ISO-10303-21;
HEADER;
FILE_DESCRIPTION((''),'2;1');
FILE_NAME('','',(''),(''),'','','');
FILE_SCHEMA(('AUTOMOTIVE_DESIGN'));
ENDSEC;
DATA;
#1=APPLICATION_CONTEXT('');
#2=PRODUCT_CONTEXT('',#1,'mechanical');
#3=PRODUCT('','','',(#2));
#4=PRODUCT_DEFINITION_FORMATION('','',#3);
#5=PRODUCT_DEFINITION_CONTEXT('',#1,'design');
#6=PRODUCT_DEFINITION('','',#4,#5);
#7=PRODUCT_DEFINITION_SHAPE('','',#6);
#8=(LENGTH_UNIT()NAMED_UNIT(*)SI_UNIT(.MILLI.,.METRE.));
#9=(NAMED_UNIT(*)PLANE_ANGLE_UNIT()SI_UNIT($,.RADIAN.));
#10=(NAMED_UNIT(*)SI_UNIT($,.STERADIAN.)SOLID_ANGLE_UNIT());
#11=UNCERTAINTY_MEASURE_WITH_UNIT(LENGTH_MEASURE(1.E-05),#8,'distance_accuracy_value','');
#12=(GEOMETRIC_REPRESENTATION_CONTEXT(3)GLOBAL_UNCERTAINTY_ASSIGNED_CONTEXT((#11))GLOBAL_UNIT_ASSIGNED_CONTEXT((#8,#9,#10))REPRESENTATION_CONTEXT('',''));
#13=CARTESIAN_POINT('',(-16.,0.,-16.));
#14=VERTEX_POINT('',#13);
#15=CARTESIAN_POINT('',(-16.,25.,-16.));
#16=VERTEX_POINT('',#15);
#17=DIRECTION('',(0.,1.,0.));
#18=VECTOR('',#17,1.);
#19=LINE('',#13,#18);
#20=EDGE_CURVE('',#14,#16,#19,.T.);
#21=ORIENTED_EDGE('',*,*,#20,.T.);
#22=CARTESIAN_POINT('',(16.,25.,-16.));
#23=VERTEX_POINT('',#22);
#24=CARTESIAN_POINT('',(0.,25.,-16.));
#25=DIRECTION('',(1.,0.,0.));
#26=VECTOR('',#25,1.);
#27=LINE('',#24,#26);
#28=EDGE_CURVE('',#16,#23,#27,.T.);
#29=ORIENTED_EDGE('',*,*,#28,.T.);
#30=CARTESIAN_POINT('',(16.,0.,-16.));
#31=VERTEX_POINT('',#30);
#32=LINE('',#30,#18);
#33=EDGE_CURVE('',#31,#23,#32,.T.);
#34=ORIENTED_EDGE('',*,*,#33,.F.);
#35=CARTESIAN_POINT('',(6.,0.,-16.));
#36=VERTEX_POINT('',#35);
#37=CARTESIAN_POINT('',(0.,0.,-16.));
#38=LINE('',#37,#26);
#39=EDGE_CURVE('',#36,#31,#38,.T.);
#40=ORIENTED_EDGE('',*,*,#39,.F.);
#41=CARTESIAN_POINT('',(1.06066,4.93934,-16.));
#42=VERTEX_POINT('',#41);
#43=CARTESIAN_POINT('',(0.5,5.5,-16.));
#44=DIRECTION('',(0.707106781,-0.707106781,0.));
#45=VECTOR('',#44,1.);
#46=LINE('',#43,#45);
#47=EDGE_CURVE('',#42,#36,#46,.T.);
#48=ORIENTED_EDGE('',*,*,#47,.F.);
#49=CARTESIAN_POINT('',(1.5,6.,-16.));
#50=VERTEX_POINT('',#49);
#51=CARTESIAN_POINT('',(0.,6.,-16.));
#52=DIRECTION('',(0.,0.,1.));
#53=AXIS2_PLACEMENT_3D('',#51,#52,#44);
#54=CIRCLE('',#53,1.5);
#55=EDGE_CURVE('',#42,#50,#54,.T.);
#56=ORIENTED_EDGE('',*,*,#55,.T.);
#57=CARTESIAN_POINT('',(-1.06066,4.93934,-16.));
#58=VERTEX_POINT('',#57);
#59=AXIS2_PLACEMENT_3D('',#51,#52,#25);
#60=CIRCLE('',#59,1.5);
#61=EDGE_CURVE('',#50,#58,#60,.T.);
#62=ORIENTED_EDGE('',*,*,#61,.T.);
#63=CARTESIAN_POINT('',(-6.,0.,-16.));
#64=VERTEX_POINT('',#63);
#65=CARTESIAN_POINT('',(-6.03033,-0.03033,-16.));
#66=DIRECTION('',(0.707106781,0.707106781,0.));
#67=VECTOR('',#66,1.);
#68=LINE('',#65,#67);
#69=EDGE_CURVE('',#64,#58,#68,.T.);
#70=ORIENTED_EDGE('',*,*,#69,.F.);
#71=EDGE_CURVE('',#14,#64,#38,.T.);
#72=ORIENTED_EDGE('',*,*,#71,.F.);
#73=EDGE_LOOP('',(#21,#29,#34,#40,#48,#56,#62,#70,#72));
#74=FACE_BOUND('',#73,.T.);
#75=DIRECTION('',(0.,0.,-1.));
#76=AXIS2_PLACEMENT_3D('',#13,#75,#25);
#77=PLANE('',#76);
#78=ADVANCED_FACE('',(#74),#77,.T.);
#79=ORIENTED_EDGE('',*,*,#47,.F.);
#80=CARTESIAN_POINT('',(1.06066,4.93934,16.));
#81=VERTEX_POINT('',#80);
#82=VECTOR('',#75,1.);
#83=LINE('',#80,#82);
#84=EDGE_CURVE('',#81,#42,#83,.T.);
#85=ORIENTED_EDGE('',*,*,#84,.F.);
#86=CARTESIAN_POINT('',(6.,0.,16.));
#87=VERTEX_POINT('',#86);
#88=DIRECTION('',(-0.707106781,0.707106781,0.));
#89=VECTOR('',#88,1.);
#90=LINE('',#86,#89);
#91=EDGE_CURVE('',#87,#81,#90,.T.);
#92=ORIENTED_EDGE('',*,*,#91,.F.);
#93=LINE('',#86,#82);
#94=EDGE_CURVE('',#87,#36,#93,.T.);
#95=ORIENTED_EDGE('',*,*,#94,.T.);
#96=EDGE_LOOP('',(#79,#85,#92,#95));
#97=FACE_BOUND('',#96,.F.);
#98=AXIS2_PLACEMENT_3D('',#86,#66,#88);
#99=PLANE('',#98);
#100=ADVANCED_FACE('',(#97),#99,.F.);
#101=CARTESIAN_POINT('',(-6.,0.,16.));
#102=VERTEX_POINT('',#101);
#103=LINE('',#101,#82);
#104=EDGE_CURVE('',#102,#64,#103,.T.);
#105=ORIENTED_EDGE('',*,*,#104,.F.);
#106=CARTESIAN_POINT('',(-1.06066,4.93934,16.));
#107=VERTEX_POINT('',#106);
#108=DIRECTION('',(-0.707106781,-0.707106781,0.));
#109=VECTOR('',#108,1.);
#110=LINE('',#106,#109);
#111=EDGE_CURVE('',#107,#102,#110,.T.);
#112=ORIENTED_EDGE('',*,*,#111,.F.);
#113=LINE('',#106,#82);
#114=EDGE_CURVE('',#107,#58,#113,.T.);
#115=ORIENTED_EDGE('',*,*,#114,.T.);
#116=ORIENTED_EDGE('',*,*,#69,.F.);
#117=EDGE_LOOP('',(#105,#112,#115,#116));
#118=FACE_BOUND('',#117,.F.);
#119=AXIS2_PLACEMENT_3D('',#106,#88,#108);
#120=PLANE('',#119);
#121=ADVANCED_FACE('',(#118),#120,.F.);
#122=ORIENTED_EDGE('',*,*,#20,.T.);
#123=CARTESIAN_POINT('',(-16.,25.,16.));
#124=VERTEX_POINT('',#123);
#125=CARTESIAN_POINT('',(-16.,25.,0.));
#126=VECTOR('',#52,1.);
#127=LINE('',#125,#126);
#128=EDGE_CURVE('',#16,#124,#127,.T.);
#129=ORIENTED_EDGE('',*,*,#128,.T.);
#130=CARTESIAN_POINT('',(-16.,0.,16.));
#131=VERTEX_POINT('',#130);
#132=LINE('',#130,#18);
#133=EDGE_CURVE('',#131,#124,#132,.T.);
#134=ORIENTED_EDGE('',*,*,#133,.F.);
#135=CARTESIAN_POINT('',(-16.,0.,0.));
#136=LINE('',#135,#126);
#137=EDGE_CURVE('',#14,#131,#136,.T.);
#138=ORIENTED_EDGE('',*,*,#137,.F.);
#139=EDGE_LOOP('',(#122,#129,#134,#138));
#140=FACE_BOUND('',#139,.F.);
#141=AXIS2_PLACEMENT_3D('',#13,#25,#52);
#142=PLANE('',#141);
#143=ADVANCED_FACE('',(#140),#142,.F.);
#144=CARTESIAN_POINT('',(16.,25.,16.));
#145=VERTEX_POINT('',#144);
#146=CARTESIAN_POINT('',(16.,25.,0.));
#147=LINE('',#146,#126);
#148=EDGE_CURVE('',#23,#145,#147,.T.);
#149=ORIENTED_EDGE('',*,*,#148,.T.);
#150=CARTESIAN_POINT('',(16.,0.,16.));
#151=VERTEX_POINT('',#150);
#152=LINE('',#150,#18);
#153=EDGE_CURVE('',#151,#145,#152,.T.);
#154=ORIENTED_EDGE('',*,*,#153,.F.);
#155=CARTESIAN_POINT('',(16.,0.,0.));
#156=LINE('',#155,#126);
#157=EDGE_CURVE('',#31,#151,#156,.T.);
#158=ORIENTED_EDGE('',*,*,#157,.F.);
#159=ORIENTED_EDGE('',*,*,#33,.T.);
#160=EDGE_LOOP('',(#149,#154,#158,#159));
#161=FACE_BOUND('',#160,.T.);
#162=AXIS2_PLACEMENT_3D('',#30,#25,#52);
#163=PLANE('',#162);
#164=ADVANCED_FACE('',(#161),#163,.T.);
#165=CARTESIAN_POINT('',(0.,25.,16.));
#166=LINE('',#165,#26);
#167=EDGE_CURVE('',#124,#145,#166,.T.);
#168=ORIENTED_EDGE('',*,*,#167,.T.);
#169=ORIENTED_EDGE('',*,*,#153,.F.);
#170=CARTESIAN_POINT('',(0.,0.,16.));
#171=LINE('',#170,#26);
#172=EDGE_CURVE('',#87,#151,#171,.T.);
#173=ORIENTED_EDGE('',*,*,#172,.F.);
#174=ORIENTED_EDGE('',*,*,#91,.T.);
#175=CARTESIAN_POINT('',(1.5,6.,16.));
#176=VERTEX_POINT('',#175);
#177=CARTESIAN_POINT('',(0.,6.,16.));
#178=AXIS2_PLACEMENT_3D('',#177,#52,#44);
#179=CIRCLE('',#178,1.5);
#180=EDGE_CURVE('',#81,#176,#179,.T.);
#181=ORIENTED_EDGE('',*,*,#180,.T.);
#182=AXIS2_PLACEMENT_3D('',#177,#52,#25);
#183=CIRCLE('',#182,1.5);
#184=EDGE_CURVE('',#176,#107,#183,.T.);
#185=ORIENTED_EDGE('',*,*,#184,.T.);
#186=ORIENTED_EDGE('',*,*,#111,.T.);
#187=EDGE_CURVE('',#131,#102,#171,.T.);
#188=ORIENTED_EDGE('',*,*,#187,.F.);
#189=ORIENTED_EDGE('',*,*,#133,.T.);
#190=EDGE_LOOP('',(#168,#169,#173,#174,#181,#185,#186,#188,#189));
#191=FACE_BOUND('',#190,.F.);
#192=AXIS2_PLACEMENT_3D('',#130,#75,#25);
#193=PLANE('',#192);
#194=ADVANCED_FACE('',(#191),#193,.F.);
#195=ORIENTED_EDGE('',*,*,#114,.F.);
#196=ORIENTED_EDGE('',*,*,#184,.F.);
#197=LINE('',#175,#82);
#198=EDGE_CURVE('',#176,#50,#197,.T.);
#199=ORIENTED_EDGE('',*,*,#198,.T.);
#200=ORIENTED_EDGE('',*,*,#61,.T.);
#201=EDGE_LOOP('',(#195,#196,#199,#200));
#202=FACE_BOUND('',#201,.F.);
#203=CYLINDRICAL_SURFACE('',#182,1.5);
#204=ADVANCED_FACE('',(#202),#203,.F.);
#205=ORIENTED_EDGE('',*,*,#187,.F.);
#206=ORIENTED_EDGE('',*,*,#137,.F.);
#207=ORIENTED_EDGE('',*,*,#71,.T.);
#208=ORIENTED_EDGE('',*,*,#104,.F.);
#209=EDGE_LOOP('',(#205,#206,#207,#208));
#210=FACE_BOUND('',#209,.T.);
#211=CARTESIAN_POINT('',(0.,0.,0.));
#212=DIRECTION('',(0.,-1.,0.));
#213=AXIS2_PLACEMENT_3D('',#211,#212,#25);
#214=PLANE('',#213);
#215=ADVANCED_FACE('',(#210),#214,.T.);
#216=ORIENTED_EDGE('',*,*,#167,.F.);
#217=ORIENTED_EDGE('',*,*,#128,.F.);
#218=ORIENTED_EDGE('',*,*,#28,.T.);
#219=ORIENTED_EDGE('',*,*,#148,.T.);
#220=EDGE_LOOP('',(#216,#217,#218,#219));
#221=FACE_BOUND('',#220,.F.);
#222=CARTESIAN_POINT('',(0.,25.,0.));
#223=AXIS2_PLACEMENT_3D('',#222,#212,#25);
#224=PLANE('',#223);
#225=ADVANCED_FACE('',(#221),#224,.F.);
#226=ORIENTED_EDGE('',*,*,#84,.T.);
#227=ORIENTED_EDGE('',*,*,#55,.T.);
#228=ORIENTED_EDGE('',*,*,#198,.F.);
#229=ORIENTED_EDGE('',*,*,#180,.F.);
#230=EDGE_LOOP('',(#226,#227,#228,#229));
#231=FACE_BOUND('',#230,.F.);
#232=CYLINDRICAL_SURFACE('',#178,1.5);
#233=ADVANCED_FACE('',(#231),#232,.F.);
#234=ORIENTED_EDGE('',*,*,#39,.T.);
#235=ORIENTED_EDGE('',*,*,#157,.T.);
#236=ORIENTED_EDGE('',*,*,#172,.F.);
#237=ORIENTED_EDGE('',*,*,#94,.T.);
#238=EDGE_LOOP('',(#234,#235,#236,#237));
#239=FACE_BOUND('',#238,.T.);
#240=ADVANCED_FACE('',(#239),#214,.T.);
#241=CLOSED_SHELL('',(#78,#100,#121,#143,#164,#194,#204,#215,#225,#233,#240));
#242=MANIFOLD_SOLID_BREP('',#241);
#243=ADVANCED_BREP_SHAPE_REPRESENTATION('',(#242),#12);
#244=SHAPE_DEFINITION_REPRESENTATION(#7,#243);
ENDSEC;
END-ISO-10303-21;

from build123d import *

# Parameters (mm, degrees)
F0_W     = 32
F0_H     = 32
F1_DEPTH = 25
F3_DEPTH = 32.001


with BuildPart() as f1:
    # F0 (on Front) → F1 (new body)
    with BuildSketch(Plane.XZ):
        Rectangle(F0_W, F0_H)
    extrude(amount=-F1_DEPTH)

    # F2 (on face) → F3 (cut, through all)
    with BuildSketch(Plane.XY.offset(16)):
        with BuildLine():
            Line((-1.0606601718, 4.9393398282), (-6, 0))
            Line((-6, 0), (6, 0))
            Line((6, 0), (1.0606601718, 4.9393398282))
            ThreePointArc((1.0606601718, 4.9393398282), (0, 4.5), (-1.0606601718, 4.9393398282))
        make_face()
        with BuildLine():
            ThreePointArc((1.5, 6), (-0.5740251485, 7.3858192988), (-1.0606601718, 4.9393398282))
            Line((-1.0606601718, 4.9393398282), (0, 6))
            Line((0, 6), (1.0606601718, 4.9393398282))
            ThreePointArc((1.0606601718, 4.9393398282), (1.3858192988, 5.4259748515), (1.5, 6))
        make_face()
        with BuildLine():
            Line((0, 6), (-1.0606601718, 4.9393398282))
            ThreePointArc((-1.0606601718, 4.9393398282), (0, 4.5), (1.0606601718, 4.9393398282))
            Line((1.0606601718, 4.9393398282), (0, 6))
        make_face()
    extrude(amount=-F3_DEPTH, mode=Mode.SUBTRACT)


solid = f1.part
